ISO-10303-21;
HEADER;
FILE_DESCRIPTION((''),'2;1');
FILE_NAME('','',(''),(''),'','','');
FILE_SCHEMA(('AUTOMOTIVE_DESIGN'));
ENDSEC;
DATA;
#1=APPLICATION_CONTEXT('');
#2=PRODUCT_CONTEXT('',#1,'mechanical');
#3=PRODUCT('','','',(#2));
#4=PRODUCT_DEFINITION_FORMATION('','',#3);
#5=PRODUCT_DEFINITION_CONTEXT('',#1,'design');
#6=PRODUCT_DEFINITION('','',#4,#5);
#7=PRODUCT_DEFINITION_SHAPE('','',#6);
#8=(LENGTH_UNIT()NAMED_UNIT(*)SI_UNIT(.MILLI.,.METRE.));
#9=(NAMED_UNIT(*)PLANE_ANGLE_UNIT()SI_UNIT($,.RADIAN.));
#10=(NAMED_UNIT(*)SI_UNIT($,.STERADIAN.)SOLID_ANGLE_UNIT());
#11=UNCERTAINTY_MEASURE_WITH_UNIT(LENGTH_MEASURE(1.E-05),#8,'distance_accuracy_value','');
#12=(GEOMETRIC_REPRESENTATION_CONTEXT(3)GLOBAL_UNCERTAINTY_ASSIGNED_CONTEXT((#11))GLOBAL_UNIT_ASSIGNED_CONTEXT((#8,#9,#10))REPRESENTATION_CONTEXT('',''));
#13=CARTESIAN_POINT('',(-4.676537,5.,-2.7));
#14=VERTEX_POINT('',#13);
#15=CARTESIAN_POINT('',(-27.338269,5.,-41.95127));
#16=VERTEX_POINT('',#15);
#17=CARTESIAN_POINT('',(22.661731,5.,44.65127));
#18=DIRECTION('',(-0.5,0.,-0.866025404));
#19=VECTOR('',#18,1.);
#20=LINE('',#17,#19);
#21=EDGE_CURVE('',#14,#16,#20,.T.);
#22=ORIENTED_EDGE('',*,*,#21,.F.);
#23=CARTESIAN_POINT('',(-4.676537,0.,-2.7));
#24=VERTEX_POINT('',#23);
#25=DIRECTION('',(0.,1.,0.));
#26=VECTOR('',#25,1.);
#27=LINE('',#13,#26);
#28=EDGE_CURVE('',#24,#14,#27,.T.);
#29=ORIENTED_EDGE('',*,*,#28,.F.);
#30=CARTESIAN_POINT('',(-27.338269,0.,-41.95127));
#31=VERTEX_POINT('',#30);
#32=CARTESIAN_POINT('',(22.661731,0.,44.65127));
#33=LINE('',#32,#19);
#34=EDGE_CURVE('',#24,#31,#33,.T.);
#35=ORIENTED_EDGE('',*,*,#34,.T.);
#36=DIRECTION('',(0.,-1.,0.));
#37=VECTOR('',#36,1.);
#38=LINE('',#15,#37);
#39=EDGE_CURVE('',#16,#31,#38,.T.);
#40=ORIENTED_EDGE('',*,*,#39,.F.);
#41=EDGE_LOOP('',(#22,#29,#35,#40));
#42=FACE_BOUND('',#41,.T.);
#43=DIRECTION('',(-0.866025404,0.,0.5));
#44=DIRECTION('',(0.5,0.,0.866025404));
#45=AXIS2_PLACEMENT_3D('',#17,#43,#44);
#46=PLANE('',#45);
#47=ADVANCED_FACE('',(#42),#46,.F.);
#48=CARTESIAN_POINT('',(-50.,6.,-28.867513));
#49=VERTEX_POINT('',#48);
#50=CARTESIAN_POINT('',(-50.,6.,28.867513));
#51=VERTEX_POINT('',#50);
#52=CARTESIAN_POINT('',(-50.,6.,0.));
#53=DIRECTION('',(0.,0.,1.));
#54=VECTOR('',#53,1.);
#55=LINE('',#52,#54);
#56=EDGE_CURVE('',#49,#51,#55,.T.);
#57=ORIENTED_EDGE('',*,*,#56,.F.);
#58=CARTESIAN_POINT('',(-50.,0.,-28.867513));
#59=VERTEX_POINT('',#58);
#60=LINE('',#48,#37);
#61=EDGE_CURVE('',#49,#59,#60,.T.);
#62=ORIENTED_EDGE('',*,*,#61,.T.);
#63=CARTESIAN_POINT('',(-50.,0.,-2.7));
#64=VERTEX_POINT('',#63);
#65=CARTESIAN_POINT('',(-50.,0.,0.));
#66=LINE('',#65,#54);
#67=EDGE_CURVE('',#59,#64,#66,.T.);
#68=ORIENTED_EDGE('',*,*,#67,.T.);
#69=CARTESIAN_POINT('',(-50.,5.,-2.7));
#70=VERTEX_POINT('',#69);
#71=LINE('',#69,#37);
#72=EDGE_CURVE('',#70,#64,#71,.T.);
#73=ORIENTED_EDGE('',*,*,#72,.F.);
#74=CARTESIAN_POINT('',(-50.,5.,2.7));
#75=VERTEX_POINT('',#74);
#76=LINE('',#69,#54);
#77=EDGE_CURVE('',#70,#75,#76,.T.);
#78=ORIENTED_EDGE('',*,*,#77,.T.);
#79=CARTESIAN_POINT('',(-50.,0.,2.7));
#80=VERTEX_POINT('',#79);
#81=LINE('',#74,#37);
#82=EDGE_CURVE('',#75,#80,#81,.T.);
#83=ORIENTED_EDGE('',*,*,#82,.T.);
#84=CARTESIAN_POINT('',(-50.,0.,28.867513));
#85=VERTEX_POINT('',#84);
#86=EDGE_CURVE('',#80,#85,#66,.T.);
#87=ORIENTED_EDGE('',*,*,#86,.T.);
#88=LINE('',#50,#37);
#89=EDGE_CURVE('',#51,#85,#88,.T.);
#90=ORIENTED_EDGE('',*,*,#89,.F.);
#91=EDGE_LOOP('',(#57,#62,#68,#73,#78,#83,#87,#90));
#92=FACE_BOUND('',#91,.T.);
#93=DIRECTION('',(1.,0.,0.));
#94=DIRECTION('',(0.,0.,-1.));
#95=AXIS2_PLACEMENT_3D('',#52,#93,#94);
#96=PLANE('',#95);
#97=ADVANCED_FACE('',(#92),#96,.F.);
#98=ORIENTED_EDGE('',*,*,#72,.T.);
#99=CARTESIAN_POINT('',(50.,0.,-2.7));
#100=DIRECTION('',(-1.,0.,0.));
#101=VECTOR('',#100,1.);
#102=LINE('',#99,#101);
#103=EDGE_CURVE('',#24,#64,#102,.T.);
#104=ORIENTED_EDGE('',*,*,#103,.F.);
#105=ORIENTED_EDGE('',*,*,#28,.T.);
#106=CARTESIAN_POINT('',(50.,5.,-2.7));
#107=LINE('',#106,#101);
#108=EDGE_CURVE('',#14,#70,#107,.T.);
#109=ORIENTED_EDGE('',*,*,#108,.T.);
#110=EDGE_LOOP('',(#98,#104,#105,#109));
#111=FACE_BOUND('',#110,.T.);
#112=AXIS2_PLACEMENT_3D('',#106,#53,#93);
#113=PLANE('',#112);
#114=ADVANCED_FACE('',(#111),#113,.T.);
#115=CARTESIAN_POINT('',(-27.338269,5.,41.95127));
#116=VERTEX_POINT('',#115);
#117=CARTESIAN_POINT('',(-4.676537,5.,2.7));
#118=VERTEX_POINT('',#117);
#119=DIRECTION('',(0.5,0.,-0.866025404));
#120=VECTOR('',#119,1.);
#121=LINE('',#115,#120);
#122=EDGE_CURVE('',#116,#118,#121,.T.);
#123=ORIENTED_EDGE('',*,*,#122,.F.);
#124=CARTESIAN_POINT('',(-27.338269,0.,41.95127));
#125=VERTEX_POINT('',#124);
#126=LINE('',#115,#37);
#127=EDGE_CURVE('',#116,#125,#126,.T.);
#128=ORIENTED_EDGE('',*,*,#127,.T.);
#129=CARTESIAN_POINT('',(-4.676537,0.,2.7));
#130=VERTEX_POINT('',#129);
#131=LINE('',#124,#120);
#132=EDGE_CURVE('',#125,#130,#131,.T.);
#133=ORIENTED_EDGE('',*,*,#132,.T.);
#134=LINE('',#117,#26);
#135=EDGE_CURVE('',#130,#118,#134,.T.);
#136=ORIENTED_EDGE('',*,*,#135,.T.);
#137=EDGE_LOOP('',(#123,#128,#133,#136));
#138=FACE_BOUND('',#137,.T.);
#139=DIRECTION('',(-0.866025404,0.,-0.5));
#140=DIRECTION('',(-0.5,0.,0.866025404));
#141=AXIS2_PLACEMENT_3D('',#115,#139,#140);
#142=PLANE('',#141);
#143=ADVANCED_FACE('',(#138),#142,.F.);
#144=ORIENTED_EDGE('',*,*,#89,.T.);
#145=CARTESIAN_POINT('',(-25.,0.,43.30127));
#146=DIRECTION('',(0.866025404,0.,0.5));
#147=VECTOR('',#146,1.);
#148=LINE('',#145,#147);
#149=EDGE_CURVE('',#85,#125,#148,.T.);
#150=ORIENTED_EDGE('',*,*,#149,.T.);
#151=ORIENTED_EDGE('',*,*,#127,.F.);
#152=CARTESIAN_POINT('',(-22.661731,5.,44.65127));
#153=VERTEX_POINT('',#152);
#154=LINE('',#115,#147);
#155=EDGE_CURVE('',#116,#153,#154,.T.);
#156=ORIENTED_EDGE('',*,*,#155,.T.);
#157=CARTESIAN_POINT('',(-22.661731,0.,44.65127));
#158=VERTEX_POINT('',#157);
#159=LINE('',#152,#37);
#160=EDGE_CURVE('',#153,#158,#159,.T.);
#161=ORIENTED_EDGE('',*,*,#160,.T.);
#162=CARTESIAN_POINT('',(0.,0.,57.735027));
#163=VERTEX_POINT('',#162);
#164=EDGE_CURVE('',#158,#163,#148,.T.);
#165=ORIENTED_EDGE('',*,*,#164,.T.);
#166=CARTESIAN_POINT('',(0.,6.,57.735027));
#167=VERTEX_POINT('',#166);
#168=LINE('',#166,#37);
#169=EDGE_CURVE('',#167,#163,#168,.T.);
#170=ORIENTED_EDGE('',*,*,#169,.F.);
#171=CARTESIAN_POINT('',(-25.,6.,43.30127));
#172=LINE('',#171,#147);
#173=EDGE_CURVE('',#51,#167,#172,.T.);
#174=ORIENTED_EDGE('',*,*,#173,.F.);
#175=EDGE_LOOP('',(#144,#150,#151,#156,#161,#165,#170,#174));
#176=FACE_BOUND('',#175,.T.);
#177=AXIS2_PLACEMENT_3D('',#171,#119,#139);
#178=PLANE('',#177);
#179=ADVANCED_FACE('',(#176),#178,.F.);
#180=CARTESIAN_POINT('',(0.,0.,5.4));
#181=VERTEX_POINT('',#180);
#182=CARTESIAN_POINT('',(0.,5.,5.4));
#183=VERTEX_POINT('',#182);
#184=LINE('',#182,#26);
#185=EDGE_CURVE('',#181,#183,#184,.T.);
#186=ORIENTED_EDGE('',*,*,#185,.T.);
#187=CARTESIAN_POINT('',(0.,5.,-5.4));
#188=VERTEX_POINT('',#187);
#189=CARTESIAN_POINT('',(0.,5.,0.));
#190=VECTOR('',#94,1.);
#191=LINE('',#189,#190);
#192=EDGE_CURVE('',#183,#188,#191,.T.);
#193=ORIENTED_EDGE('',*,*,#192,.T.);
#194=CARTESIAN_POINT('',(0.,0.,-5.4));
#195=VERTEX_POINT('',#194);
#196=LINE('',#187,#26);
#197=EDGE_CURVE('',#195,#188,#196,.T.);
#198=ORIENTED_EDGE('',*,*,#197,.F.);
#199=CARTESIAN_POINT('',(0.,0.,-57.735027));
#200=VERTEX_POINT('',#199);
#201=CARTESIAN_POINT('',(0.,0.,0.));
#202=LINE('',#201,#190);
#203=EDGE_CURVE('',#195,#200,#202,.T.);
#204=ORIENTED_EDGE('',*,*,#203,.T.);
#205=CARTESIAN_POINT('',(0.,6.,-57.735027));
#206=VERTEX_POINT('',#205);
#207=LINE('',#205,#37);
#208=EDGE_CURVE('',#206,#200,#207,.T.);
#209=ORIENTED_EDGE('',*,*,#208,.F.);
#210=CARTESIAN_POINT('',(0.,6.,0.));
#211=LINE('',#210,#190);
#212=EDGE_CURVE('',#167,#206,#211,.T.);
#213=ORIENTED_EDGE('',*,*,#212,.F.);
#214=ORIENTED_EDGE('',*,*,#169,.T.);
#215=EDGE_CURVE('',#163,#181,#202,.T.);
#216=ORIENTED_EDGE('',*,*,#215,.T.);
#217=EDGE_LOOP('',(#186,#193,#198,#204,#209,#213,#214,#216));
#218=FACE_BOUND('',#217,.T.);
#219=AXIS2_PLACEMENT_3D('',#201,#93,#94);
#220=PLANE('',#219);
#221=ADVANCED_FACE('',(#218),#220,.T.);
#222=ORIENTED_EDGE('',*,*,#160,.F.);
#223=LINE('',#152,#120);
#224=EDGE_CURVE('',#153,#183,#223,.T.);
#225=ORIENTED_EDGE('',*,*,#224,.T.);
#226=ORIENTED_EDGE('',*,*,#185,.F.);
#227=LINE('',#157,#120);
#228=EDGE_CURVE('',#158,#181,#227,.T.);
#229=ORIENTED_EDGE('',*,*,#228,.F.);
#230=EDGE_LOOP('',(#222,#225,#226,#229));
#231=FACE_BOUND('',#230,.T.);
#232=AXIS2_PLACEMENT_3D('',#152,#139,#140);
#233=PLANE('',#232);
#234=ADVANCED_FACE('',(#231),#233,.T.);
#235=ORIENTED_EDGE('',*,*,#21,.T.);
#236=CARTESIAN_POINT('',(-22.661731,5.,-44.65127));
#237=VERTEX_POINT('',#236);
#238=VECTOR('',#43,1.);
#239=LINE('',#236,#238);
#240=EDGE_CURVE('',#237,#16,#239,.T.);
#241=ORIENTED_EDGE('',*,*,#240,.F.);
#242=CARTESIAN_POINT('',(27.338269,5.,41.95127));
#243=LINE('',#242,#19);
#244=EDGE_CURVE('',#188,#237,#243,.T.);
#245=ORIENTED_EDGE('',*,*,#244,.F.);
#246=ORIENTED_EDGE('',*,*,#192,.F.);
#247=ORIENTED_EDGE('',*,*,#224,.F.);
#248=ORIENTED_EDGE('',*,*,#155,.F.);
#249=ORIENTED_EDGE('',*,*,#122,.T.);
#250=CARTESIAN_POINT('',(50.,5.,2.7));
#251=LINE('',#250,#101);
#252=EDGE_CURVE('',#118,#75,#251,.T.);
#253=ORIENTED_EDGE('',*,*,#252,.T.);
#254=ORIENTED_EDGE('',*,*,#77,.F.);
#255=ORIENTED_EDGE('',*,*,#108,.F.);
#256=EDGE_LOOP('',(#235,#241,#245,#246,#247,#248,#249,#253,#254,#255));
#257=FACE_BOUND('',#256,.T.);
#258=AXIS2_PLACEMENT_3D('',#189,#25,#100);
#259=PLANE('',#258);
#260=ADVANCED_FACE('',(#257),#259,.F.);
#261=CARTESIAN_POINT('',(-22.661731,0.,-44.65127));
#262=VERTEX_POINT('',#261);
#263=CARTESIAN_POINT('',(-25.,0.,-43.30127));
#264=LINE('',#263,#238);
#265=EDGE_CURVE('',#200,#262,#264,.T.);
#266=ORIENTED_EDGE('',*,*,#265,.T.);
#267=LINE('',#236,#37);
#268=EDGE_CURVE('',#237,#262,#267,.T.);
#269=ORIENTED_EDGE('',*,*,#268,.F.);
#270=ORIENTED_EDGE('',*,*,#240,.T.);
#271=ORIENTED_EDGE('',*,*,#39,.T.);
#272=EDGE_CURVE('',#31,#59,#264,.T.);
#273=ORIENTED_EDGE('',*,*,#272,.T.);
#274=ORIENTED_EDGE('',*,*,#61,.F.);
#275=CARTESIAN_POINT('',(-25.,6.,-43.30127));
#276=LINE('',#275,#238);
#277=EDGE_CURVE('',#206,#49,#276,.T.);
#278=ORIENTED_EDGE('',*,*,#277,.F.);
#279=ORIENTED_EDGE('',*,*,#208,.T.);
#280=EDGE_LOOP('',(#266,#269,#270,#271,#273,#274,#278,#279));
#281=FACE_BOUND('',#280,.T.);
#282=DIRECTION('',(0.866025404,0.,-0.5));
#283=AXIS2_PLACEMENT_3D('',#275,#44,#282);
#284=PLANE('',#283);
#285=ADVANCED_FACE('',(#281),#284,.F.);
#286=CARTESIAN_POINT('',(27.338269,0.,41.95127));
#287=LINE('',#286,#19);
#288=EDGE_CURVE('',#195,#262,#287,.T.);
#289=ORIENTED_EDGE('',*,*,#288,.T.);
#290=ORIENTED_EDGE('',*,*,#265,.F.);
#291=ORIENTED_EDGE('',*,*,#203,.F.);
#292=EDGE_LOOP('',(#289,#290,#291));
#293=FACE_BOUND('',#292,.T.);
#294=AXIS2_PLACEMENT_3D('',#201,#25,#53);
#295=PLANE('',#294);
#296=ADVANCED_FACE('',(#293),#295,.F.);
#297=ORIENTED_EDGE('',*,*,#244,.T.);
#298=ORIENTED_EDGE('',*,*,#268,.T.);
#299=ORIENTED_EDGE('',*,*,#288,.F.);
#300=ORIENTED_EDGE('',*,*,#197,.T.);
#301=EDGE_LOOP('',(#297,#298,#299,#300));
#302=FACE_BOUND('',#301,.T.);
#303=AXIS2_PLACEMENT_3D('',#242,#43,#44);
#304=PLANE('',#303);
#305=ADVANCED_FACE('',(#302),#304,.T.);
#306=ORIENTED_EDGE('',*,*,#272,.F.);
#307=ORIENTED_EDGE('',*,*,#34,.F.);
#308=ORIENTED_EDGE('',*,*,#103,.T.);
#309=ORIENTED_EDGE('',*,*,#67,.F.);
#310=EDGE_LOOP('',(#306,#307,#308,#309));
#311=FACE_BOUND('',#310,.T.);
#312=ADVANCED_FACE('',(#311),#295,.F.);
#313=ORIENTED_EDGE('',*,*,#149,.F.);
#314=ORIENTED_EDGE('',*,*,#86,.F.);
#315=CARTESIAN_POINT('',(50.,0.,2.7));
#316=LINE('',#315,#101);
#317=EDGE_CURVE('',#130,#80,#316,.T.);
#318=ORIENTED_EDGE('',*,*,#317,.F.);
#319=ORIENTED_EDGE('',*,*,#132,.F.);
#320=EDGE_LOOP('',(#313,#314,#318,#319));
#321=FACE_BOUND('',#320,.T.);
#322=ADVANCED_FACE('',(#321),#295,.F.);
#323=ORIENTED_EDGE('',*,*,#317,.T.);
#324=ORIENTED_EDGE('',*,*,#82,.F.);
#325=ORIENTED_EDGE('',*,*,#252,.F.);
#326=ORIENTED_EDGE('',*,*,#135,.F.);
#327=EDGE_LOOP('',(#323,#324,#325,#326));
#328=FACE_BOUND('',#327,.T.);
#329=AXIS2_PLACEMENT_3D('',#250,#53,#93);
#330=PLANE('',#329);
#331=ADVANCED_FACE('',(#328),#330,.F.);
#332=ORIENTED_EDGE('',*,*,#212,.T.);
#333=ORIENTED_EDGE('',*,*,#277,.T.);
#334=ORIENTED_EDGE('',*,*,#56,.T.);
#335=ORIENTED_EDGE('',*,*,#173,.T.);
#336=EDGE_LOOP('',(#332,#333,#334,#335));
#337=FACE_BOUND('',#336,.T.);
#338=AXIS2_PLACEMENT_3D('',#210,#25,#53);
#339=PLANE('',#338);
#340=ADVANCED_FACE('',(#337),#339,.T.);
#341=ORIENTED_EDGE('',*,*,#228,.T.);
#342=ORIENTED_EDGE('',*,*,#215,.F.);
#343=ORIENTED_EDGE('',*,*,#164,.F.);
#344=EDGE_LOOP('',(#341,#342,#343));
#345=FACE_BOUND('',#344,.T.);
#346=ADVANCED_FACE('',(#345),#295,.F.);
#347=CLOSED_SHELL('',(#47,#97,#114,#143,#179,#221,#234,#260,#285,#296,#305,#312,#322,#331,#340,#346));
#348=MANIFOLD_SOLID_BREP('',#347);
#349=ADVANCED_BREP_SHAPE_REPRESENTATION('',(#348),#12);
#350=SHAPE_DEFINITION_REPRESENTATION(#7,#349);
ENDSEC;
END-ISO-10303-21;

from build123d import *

# Parameters (mm, degrees)
BOSS_EXTRUDE1_DEPTH     = 6
SKETCH2_W               = 100
SKETCH2_H               = 5.4
CUT_EXTRUDE_THIN1_DEPTH = 5
INTERSECT1_DEPTH        = 50


# Read off the part's stored shape, not the designer's step: Intersect1
with BuildPart() as part:
    # Sketch1 → Boss-Extrude1 (new body)
    with BuildSketch(Plane(origin=(0, 0, 0), x_dir=(1, 0, 0), z_dir=(0, 1, 0))):
        Polygon((0, 57.735026919), (-50, 28.867513459), (-50, -28.867513459), (0, -57.735026919), (50, -28.867513459), (50, 28.867513459), align=None)
    extrude(amount=BOSS_EXTRUDE1_DEPTH)

    # Sketch2 → Cut-Extrude-Thin1 (cut)
    with BuildSketch(Plane.XZ):
        Polygon((-27.33826859, 41.951270189), (22.66173141, -44.651270189), (27.33826859, -41.951270189), (-22.66173141, 44.651270189), align=None)
        Polygon((22.66173141, 44.651270189), (-27.33826859, -41.951270189), (-22.66173141, -44.651270189), (27.33826859, 41.951270189), align=None)
        Rectangle(SKETCH2_W, SKETCH2_H)
    extrude(amount=-CUT_EXTRUDE_THIN1_DEPTH, mode=Mode.SUBTRACT)

    # Intersect1 outline → Intersect1 (cut)
    with BuildSketch(Plane.YZ):
        Polygon((0, 2.7), (5, 2.7), (5, -2.7), (0, -2.7), (0, -59), (6, -59), (6, 59), (0, 59), align=None)
    extrude(amount=INTERSECT1_DEPTH, mode=Mode.SUBTRACT)


solid = part.part
